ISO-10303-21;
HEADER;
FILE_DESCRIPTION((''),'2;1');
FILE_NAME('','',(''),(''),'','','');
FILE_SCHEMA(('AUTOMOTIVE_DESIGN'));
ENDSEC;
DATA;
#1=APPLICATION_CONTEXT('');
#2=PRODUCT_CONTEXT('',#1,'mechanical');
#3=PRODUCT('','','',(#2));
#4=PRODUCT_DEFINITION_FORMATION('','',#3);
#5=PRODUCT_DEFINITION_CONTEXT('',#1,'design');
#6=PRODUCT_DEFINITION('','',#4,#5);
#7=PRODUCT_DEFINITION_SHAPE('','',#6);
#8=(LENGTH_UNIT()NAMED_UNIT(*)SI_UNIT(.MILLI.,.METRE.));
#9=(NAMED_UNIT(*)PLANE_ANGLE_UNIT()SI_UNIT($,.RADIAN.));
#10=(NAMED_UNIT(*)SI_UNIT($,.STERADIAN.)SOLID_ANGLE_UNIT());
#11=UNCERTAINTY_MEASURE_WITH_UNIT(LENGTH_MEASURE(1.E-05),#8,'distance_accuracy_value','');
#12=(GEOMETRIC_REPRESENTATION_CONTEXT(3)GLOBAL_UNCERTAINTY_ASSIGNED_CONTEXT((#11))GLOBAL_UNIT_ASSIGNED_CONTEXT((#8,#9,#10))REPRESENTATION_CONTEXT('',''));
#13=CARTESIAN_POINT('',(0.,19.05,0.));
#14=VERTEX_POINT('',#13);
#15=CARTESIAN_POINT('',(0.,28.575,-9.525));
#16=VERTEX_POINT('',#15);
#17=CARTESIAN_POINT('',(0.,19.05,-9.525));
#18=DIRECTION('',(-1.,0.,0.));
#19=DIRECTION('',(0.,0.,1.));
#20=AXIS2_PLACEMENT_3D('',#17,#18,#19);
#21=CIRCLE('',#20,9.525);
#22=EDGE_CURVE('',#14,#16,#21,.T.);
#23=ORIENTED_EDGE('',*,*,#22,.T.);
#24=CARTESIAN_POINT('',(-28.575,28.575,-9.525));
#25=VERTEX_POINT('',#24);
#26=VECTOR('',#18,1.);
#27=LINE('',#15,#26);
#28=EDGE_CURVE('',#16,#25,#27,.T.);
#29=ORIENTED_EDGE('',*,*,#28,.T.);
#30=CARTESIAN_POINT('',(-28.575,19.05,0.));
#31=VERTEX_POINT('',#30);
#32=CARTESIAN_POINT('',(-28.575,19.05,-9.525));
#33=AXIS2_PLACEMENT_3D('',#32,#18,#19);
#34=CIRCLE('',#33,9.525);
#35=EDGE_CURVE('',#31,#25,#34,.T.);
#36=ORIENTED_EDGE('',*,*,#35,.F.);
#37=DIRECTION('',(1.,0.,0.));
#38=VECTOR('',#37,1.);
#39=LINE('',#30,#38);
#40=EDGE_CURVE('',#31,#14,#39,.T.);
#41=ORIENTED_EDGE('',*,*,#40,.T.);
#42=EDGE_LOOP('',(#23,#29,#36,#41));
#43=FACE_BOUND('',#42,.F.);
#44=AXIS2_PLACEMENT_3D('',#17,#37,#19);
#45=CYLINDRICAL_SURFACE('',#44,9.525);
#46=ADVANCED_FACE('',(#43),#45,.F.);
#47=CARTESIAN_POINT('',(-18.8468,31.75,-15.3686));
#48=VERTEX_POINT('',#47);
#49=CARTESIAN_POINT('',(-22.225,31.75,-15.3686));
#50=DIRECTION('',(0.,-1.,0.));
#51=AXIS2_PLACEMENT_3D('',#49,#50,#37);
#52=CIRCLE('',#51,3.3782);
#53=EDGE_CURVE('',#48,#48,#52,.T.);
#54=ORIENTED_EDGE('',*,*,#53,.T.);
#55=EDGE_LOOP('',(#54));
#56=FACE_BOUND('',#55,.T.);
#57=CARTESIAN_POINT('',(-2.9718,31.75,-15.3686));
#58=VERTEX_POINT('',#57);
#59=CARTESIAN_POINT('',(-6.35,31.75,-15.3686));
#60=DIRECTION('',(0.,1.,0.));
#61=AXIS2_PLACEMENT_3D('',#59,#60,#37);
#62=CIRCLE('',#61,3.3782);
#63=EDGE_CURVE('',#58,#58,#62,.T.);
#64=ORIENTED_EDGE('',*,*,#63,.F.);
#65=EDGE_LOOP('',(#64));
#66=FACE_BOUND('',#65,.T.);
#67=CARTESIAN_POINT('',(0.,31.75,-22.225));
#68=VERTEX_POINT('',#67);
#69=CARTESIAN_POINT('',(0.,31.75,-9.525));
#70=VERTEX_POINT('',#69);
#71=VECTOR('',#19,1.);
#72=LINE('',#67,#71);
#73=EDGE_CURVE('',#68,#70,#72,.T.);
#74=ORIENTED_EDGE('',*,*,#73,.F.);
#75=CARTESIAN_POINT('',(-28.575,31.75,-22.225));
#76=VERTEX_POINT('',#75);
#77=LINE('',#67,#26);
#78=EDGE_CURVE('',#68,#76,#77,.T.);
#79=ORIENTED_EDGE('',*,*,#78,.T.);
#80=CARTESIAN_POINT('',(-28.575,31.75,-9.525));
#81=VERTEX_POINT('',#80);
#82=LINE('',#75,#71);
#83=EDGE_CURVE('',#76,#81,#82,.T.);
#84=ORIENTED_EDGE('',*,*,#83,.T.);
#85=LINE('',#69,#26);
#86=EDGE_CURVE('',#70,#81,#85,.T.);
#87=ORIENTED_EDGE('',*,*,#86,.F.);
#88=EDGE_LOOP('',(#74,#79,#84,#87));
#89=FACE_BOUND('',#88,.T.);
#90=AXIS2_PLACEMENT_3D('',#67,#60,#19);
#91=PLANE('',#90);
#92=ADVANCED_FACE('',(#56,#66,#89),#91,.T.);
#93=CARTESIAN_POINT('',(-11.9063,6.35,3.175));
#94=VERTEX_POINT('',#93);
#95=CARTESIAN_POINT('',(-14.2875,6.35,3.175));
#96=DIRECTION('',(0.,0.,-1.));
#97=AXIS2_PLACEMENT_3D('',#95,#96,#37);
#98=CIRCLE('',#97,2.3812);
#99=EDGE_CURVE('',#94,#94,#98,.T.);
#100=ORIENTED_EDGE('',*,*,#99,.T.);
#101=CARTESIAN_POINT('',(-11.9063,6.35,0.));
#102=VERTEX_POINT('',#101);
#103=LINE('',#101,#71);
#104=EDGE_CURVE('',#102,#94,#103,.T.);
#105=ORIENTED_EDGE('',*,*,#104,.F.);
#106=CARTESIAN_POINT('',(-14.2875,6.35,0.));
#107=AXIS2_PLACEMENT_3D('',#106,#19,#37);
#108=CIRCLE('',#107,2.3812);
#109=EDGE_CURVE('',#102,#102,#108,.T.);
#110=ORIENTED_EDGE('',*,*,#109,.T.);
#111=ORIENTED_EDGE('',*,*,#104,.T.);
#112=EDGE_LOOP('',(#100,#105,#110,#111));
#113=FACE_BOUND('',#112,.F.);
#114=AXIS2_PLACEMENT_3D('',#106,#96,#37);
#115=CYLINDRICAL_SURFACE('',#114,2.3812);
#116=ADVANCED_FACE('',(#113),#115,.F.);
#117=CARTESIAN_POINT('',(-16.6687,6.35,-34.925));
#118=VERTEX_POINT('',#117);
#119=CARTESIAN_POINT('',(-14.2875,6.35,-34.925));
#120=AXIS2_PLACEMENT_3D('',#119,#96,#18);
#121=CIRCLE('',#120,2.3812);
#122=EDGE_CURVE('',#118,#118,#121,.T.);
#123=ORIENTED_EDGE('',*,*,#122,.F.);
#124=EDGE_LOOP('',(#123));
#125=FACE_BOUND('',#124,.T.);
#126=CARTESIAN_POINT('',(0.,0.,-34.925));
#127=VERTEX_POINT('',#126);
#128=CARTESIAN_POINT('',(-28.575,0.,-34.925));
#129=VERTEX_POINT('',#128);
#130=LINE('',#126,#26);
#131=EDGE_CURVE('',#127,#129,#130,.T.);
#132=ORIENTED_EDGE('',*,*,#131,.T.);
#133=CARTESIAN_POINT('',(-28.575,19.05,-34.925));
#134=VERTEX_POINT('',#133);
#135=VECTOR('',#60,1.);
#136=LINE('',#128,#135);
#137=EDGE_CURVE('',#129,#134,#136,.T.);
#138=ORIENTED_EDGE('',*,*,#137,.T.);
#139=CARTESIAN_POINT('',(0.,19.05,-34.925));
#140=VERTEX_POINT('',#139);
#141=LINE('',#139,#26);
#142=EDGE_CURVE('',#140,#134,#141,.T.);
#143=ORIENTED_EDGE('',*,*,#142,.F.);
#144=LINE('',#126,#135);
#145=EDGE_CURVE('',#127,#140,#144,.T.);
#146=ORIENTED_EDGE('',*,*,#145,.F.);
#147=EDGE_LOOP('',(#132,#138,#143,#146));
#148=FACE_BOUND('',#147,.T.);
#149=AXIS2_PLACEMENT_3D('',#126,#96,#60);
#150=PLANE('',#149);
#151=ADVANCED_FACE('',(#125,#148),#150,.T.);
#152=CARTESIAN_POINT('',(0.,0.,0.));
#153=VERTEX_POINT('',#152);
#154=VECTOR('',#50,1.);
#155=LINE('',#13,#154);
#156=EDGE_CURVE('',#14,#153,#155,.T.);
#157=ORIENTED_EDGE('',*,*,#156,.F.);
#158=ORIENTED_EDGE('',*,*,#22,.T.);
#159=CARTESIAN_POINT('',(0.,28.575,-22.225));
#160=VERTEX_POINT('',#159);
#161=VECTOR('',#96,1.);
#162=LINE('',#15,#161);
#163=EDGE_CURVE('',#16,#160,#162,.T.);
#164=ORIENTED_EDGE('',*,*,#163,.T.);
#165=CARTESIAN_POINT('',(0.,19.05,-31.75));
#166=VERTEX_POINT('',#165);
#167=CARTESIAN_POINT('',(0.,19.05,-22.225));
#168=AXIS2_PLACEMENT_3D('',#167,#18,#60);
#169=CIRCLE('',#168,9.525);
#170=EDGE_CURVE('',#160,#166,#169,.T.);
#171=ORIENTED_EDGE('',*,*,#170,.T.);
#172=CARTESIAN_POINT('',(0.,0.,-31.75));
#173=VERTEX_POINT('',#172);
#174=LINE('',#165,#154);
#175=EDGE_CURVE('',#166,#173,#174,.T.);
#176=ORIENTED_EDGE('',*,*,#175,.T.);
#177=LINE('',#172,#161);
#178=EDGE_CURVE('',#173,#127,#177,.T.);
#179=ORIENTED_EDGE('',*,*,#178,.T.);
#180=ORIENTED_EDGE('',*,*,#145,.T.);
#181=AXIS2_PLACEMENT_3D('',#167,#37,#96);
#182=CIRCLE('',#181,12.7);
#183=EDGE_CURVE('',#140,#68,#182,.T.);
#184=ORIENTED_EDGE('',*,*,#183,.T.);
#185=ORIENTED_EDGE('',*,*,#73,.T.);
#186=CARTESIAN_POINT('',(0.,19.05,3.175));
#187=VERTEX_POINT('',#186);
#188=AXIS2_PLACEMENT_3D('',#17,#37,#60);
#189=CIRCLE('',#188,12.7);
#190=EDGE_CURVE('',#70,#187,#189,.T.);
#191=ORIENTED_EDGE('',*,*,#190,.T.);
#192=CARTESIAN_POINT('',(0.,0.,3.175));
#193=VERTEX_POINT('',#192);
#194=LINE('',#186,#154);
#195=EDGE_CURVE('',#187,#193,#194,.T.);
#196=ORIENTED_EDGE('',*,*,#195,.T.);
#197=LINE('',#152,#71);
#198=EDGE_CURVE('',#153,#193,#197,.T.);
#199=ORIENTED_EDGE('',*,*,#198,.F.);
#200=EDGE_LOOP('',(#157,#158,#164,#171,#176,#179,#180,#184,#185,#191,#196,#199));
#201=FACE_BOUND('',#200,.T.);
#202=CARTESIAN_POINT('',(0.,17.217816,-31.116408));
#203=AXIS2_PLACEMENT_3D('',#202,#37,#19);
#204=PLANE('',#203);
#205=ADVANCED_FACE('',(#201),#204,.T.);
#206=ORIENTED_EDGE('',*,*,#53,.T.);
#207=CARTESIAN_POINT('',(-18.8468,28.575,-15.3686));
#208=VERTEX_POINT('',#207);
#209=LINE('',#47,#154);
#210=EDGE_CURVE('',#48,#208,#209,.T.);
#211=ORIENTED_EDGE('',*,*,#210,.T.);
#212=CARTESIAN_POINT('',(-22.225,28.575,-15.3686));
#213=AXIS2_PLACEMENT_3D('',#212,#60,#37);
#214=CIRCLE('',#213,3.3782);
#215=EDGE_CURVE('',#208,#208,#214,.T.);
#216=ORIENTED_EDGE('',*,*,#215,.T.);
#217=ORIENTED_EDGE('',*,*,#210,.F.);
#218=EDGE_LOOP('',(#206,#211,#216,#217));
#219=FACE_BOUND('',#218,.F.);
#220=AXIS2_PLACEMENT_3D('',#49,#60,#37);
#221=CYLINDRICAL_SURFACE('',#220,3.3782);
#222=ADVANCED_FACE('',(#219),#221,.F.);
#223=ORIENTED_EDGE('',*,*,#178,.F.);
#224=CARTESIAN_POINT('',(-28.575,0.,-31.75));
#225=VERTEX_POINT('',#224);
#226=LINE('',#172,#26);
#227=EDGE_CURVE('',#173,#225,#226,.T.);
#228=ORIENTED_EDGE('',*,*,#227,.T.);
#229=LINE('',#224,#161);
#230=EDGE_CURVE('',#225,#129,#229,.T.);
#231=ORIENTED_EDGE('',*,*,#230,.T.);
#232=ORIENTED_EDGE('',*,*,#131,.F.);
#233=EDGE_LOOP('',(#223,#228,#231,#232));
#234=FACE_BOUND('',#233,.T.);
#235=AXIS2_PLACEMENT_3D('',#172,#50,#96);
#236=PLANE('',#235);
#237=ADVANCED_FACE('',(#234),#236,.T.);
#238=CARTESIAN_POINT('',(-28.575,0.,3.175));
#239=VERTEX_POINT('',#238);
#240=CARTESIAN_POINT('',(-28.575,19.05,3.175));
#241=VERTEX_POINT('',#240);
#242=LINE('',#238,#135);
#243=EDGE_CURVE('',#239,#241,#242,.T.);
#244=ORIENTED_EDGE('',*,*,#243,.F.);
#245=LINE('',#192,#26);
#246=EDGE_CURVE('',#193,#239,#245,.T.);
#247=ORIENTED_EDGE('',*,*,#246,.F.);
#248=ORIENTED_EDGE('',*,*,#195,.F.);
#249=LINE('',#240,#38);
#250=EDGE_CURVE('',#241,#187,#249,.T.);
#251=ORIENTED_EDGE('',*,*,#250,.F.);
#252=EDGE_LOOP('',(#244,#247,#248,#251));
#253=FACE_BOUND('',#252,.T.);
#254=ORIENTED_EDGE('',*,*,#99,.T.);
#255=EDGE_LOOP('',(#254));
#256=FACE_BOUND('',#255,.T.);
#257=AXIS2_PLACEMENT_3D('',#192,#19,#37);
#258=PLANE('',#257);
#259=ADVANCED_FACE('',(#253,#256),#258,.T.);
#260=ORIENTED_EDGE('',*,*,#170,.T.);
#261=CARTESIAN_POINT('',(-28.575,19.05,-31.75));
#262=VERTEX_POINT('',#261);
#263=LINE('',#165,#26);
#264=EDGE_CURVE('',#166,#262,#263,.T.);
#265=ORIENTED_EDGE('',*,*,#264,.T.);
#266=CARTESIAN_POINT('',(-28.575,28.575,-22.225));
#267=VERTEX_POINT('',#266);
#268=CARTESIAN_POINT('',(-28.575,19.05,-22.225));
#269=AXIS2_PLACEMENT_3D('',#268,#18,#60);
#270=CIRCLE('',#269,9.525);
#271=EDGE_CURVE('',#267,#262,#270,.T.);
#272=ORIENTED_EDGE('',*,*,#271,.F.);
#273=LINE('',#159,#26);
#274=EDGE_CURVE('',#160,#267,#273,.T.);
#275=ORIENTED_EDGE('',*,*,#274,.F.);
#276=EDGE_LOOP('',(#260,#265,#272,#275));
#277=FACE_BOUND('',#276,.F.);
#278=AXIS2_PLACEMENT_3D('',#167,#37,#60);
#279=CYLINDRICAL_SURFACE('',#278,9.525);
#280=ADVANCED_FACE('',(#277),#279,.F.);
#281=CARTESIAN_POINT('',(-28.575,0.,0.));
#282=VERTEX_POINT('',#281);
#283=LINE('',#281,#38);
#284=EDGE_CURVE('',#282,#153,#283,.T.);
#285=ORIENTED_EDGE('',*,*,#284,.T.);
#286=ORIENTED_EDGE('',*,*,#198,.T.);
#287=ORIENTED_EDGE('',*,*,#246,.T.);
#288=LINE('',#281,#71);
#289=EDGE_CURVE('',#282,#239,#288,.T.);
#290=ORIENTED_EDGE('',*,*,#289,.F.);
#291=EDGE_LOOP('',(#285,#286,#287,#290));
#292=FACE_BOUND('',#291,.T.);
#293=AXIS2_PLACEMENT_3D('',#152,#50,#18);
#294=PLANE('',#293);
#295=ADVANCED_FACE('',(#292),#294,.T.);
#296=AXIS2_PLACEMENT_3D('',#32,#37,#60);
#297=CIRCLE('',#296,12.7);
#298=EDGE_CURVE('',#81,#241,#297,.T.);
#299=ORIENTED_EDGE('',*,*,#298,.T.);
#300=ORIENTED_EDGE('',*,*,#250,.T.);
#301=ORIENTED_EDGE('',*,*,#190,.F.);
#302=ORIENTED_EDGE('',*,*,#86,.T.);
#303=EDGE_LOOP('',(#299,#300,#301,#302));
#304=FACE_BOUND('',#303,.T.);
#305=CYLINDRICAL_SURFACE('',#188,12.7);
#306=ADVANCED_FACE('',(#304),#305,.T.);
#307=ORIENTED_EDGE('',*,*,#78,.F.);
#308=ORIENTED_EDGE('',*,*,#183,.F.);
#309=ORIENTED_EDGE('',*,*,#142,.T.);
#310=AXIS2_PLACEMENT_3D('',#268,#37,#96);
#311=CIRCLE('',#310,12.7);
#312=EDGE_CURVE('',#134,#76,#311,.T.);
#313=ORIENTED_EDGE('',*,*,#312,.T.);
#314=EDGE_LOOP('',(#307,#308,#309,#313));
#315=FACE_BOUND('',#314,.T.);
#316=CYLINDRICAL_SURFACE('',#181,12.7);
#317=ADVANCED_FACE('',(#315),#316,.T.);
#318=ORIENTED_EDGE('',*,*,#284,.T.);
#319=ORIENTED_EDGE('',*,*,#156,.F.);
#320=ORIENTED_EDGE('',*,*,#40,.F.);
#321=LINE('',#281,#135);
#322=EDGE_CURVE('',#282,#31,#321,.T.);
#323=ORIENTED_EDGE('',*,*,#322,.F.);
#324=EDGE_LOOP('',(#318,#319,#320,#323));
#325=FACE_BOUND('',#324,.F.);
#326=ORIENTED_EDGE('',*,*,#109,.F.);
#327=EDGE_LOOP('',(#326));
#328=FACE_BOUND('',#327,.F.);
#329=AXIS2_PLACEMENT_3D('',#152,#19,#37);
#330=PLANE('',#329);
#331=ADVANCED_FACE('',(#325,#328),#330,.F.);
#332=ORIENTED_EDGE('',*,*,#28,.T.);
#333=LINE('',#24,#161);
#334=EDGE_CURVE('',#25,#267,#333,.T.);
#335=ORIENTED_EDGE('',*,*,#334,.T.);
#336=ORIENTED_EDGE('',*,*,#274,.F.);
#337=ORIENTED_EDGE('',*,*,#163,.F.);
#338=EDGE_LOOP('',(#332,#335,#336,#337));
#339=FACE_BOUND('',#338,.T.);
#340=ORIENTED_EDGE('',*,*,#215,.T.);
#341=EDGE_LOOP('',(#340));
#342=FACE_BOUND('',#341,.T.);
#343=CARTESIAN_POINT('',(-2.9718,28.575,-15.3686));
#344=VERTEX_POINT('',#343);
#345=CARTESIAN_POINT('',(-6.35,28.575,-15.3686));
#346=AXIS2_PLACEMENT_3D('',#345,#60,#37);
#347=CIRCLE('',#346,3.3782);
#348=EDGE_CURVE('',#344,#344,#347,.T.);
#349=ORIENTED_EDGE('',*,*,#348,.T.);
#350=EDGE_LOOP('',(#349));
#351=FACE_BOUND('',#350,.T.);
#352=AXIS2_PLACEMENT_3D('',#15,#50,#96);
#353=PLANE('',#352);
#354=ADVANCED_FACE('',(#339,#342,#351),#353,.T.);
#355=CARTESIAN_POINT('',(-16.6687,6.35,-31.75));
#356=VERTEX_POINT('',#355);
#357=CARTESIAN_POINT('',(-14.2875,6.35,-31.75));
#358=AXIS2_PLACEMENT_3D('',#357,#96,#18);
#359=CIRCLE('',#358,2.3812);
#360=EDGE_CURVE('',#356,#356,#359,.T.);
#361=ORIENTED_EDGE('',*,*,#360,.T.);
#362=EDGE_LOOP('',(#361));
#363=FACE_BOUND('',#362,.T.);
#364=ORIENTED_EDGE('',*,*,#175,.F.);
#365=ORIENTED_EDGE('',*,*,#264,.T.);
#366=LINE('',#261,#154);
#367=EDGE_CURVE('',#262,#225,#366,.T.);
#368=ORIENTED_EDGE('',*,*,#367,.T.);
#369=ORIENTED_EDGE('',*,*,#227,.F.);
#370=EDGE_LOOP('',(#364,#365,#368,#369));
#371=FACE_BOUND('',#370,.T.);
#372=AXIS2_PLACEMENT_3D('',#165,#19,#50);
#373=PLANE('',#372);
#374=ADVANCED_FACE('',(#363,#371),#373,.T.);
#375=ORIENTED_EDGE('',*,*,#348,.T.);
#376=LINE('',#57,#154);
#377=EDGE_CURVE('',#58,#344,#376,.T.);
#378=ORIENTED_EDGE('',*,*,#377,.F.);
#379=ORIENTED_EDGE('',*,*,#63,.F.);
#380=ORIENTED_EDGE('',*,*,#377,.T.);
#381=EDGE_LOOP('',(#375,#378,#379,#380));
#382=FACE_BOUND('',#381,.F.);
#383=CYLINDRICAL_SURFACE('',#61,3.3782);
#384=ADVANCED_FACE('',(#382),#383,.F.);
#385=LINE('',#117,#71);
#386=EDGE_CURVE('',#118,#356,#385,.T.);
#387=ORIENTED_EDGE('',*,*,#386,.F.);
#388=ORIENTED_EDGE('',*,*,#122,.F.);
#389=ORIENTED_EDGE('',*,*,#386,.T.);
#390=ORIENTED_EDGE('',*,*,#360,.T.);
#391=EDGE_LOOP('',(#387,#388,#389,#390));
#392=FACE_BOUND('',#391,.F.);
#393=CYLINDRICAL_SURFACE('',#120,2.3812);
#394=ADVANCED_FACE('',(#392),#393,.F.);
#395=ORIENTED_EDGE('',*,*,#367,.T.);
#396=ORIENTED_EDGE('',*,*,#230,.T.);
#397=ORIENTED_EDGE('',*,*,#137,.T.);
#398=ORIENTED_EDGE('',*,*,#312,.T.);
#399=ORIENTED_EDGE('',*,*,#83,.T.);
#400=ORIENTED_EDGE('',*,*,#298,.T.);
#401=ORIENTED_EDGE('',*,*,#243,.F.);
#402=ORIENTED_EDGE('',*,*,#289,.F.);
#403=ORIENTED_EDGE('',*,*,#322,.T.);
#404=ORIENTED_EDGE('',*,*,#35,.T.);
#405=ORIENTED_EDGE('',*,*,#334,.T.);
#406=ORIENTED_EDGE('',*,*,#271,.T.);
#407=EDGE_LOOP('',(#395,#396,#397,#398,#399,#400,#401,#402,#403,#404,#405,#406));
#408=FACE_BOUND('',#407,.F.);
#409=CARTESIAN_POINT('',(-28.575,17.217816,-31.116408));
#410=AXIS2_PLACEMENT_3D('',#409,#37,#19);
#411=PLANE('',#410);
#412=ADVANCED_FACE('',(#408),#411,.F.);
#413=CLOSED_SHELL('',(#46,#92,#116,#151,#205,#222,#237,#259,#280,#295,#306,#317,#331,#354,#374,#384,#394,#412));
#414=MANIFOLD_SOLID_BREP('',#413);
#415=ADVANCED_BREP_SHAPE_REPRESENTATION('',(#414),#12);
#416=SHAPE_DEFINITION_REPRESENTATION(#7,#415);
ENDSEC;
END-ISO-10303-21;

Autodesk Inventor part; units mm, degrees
ref_plane "YZ Plane" through (0, 0, 0) normal (1, 0, 0) x (0, 1, 0)
ref_plane "XZ Plane" through (0, 0, 0) normal (0, 1, 0) x (-1, 0, 0)
ref_plane "XY Plane" through (0, 0, 0) normal (0, 0, 1) x (1, 0, 0)
sketch "Sketch1" plane through (0, 0, 0) normal (0, 0, 1) x (1, 0, 0)
  line L0 (0, 0) -> (-28.575, 0)
  line L1 (-28.575, 0) -> (-28.575, 19.05)
  line L2 (-28.575, 19.05) -> (0, 19.05)
  line L3 (0, 19.05) -> (0, 0)
  line L4 (-14.2875, 0) -> (-14.2875, 6.35)
  circle A0 centre (-14.2875, 6.35) radius 2.3812
  dimension "d0" = 28.575
  dimension "d1" = 19.05
  dimension "d2" = 6.35
  dimension "d3" = 4.7625
extrude "Plate1" add sketch "Sketch1" along normal blind 3.175
sketch "Sketch5" plane through (0, 28.575, -9.525) normal (0, 1, 0) x (-1, 0, 0)
  line L0 (28.575, 0) -> (0, 0)
  line L1 (0, 0) -> (0, -12.7)
  line L2 (0, -12.7) -> (28.575, -12.7)
  line L3 (28.575, -12.7) -> (28.575, 0)
edge flange "Flange3" height 25.4 angle 90 thickness 3.175 bend radius 9.525 thickness toward (0, 1, 0) relief tear relief width 3.175 relief depth 1.5875 edges at (-14.2875, 19.05, 0) wall of the first edge with corners at (-28.575, 28.575, -9.525) (0, 28.575, -9.525) (0, 28.575, -22.225) (-28.575, 28.575, -22.225)
bend "Bend3"
corner "Corner3"
sketch "Sketch6" plane through (0, 19.05, -31.75) normal (0, 0, -1) x (-1, 0, 0)
  line L0 (28.575, 0) -> (0, 0)
  line L1 (0, 0) -> (0, -19.05)
  line L2 (0, -19.05) -> (28.575, -19.05)
  line L3 (28.575, -19.05) -> (28.575, 0)
edge flange "Flange4" height 31.75 angle 90 thickness 3.175 bend radius 9.525 thickness toward (0, 0, -1) relief tear relief width 3.175 relief depth 1.5875 edges at (-14.2875, 28.575, -22.225) wall of the first edge with corners at (-28.575, 19.05, -31.75) (0, 19.05, -31.75) (0, 0, -31.75) (-28.575, 0, -31.75)
bend "Bend4"
corner "Corner4"
sketch "Sketch7" plane through (0, 0, -34.925) normal (0, 0, -1) x (-1, 0, 0)
  circle A0 centre (14.2875, 6.35) radius 2.3812 projected
  circle A1 centre (14.2875, 6.35) radius 2.3812 projected
extrude "Cut2" cut sketch "Sketch7" against normal blind 3.175
sketch "Sketch8" plane through (-28.575, 31.75, -9.525) normal (0, 1, 0) x (1, 0, 0)
  line L0 (28.575, 12.7) -> (28.575, 0) projected
  line L1 (0, 0) -> (0, 12.7) projected
  line L2 (0, 5.8436) -> (6.35, 5.8436)
  circle A0 centre (6.35, 5.8436) radius 3.3782
  line L3 (28.575, 5.8436) -> (22.225, 5.8436)
  circle A1 centre (22.225, 5.8436) radius 3.3782
  point P0 (28.575, -9.525)
  dimension "d51" = 6.35
  dimension "d52" = 6.7564
  dimension "d53" = 6.35
  dimension "d54" = 6.7564
extrude "Cut3" cut sketch "Sketch8" against normal blind 3.175
sketch "Sketch9" plane through (-28.575, 31.75, -9.525) normal (0, 1, 0) x (1, 0, 0)
  circle A0 centre (6.35, 5.8436) radius 3.3782 projected
  circle A1 centre (22.225, 5.8436) radius 3.3782 projected
  line L0 (0, 0) -> (28.575, 0) projected
  line L1 (28.575, 12.7) -> (28.575, 0) projected
  line L2 (0, 12.7) -> (28.575, 12.7) projected
  line L3 (0, 0) -> (0, 12.7) projected
  point P0 (28.575, -9.525)
sketch "Sketch10" plane through (-28.575, 28.575, -9.525) normal (0, -1, 0) x (1, 0, 0)
  circle A0 centre (6.35, -5.8436) radius 3.3782 projected
  circle A1 centre (22.225, -5.8436) radius 3.3782 projected
  line L0 (28.575, 0) -> (0, 0) projected
  line L1 (0, -12.7) -> (0, 0) projected
  line L2 (0, -12.7) -> (28.575, -12.7) projected
  line L3 (28.575, -12.7) -> (28.575, 0) projected
  point P0 (28.575, 9.525)
equation "\"d49\" = Thickness"
equation "\"d55\" = Thickness"
equation "\"d29\" = BendReliefWidth"
equation "\"d30\" = BendReliefDepth"
equation "\"d31\" = MinimumRemnant"
equation "\"d32\" = BendRadius"
equation "\"d36\" = CornerReliefSize"
equation "\"d37\" = GapSize"
equation "\"d38\" = JacobiRadiusSize"
equation "\"d39\" = BendReliefWidth"
equation "\"d40\" = BendReliefDepth"
equation "\"d41\" = MinimumRemnant"
equation "\"d42\" = BendRadius"
equation "\"d46\" = CornerReliefSize"
equation "\"d47\" = GapSize"
equation "\"d48\" = JacobiRadiusSize"
equation "\"BendRadius\" = Thickness"
equation "\"BendReliefWidth\" = Thickness"
equation "\"BendReliefDepth\" = 0.5 * Thickness"
equation "\"CornerReliefSize\" = 4 * Thickness"
equation "\"MinimumRemnant\" = 2 * Thickness"
equation "\"TransitionRadius\" = BendRadius"
equation "\"JacobiRadiusSize\" = BendRadius"
equation "\"GapSize\" = Thickness"
equation "\"d4\" = BendRadius"
equation "\"Thickness\" = 3.175"
properties part number "pulley mount" material "Aluminum 6061"
